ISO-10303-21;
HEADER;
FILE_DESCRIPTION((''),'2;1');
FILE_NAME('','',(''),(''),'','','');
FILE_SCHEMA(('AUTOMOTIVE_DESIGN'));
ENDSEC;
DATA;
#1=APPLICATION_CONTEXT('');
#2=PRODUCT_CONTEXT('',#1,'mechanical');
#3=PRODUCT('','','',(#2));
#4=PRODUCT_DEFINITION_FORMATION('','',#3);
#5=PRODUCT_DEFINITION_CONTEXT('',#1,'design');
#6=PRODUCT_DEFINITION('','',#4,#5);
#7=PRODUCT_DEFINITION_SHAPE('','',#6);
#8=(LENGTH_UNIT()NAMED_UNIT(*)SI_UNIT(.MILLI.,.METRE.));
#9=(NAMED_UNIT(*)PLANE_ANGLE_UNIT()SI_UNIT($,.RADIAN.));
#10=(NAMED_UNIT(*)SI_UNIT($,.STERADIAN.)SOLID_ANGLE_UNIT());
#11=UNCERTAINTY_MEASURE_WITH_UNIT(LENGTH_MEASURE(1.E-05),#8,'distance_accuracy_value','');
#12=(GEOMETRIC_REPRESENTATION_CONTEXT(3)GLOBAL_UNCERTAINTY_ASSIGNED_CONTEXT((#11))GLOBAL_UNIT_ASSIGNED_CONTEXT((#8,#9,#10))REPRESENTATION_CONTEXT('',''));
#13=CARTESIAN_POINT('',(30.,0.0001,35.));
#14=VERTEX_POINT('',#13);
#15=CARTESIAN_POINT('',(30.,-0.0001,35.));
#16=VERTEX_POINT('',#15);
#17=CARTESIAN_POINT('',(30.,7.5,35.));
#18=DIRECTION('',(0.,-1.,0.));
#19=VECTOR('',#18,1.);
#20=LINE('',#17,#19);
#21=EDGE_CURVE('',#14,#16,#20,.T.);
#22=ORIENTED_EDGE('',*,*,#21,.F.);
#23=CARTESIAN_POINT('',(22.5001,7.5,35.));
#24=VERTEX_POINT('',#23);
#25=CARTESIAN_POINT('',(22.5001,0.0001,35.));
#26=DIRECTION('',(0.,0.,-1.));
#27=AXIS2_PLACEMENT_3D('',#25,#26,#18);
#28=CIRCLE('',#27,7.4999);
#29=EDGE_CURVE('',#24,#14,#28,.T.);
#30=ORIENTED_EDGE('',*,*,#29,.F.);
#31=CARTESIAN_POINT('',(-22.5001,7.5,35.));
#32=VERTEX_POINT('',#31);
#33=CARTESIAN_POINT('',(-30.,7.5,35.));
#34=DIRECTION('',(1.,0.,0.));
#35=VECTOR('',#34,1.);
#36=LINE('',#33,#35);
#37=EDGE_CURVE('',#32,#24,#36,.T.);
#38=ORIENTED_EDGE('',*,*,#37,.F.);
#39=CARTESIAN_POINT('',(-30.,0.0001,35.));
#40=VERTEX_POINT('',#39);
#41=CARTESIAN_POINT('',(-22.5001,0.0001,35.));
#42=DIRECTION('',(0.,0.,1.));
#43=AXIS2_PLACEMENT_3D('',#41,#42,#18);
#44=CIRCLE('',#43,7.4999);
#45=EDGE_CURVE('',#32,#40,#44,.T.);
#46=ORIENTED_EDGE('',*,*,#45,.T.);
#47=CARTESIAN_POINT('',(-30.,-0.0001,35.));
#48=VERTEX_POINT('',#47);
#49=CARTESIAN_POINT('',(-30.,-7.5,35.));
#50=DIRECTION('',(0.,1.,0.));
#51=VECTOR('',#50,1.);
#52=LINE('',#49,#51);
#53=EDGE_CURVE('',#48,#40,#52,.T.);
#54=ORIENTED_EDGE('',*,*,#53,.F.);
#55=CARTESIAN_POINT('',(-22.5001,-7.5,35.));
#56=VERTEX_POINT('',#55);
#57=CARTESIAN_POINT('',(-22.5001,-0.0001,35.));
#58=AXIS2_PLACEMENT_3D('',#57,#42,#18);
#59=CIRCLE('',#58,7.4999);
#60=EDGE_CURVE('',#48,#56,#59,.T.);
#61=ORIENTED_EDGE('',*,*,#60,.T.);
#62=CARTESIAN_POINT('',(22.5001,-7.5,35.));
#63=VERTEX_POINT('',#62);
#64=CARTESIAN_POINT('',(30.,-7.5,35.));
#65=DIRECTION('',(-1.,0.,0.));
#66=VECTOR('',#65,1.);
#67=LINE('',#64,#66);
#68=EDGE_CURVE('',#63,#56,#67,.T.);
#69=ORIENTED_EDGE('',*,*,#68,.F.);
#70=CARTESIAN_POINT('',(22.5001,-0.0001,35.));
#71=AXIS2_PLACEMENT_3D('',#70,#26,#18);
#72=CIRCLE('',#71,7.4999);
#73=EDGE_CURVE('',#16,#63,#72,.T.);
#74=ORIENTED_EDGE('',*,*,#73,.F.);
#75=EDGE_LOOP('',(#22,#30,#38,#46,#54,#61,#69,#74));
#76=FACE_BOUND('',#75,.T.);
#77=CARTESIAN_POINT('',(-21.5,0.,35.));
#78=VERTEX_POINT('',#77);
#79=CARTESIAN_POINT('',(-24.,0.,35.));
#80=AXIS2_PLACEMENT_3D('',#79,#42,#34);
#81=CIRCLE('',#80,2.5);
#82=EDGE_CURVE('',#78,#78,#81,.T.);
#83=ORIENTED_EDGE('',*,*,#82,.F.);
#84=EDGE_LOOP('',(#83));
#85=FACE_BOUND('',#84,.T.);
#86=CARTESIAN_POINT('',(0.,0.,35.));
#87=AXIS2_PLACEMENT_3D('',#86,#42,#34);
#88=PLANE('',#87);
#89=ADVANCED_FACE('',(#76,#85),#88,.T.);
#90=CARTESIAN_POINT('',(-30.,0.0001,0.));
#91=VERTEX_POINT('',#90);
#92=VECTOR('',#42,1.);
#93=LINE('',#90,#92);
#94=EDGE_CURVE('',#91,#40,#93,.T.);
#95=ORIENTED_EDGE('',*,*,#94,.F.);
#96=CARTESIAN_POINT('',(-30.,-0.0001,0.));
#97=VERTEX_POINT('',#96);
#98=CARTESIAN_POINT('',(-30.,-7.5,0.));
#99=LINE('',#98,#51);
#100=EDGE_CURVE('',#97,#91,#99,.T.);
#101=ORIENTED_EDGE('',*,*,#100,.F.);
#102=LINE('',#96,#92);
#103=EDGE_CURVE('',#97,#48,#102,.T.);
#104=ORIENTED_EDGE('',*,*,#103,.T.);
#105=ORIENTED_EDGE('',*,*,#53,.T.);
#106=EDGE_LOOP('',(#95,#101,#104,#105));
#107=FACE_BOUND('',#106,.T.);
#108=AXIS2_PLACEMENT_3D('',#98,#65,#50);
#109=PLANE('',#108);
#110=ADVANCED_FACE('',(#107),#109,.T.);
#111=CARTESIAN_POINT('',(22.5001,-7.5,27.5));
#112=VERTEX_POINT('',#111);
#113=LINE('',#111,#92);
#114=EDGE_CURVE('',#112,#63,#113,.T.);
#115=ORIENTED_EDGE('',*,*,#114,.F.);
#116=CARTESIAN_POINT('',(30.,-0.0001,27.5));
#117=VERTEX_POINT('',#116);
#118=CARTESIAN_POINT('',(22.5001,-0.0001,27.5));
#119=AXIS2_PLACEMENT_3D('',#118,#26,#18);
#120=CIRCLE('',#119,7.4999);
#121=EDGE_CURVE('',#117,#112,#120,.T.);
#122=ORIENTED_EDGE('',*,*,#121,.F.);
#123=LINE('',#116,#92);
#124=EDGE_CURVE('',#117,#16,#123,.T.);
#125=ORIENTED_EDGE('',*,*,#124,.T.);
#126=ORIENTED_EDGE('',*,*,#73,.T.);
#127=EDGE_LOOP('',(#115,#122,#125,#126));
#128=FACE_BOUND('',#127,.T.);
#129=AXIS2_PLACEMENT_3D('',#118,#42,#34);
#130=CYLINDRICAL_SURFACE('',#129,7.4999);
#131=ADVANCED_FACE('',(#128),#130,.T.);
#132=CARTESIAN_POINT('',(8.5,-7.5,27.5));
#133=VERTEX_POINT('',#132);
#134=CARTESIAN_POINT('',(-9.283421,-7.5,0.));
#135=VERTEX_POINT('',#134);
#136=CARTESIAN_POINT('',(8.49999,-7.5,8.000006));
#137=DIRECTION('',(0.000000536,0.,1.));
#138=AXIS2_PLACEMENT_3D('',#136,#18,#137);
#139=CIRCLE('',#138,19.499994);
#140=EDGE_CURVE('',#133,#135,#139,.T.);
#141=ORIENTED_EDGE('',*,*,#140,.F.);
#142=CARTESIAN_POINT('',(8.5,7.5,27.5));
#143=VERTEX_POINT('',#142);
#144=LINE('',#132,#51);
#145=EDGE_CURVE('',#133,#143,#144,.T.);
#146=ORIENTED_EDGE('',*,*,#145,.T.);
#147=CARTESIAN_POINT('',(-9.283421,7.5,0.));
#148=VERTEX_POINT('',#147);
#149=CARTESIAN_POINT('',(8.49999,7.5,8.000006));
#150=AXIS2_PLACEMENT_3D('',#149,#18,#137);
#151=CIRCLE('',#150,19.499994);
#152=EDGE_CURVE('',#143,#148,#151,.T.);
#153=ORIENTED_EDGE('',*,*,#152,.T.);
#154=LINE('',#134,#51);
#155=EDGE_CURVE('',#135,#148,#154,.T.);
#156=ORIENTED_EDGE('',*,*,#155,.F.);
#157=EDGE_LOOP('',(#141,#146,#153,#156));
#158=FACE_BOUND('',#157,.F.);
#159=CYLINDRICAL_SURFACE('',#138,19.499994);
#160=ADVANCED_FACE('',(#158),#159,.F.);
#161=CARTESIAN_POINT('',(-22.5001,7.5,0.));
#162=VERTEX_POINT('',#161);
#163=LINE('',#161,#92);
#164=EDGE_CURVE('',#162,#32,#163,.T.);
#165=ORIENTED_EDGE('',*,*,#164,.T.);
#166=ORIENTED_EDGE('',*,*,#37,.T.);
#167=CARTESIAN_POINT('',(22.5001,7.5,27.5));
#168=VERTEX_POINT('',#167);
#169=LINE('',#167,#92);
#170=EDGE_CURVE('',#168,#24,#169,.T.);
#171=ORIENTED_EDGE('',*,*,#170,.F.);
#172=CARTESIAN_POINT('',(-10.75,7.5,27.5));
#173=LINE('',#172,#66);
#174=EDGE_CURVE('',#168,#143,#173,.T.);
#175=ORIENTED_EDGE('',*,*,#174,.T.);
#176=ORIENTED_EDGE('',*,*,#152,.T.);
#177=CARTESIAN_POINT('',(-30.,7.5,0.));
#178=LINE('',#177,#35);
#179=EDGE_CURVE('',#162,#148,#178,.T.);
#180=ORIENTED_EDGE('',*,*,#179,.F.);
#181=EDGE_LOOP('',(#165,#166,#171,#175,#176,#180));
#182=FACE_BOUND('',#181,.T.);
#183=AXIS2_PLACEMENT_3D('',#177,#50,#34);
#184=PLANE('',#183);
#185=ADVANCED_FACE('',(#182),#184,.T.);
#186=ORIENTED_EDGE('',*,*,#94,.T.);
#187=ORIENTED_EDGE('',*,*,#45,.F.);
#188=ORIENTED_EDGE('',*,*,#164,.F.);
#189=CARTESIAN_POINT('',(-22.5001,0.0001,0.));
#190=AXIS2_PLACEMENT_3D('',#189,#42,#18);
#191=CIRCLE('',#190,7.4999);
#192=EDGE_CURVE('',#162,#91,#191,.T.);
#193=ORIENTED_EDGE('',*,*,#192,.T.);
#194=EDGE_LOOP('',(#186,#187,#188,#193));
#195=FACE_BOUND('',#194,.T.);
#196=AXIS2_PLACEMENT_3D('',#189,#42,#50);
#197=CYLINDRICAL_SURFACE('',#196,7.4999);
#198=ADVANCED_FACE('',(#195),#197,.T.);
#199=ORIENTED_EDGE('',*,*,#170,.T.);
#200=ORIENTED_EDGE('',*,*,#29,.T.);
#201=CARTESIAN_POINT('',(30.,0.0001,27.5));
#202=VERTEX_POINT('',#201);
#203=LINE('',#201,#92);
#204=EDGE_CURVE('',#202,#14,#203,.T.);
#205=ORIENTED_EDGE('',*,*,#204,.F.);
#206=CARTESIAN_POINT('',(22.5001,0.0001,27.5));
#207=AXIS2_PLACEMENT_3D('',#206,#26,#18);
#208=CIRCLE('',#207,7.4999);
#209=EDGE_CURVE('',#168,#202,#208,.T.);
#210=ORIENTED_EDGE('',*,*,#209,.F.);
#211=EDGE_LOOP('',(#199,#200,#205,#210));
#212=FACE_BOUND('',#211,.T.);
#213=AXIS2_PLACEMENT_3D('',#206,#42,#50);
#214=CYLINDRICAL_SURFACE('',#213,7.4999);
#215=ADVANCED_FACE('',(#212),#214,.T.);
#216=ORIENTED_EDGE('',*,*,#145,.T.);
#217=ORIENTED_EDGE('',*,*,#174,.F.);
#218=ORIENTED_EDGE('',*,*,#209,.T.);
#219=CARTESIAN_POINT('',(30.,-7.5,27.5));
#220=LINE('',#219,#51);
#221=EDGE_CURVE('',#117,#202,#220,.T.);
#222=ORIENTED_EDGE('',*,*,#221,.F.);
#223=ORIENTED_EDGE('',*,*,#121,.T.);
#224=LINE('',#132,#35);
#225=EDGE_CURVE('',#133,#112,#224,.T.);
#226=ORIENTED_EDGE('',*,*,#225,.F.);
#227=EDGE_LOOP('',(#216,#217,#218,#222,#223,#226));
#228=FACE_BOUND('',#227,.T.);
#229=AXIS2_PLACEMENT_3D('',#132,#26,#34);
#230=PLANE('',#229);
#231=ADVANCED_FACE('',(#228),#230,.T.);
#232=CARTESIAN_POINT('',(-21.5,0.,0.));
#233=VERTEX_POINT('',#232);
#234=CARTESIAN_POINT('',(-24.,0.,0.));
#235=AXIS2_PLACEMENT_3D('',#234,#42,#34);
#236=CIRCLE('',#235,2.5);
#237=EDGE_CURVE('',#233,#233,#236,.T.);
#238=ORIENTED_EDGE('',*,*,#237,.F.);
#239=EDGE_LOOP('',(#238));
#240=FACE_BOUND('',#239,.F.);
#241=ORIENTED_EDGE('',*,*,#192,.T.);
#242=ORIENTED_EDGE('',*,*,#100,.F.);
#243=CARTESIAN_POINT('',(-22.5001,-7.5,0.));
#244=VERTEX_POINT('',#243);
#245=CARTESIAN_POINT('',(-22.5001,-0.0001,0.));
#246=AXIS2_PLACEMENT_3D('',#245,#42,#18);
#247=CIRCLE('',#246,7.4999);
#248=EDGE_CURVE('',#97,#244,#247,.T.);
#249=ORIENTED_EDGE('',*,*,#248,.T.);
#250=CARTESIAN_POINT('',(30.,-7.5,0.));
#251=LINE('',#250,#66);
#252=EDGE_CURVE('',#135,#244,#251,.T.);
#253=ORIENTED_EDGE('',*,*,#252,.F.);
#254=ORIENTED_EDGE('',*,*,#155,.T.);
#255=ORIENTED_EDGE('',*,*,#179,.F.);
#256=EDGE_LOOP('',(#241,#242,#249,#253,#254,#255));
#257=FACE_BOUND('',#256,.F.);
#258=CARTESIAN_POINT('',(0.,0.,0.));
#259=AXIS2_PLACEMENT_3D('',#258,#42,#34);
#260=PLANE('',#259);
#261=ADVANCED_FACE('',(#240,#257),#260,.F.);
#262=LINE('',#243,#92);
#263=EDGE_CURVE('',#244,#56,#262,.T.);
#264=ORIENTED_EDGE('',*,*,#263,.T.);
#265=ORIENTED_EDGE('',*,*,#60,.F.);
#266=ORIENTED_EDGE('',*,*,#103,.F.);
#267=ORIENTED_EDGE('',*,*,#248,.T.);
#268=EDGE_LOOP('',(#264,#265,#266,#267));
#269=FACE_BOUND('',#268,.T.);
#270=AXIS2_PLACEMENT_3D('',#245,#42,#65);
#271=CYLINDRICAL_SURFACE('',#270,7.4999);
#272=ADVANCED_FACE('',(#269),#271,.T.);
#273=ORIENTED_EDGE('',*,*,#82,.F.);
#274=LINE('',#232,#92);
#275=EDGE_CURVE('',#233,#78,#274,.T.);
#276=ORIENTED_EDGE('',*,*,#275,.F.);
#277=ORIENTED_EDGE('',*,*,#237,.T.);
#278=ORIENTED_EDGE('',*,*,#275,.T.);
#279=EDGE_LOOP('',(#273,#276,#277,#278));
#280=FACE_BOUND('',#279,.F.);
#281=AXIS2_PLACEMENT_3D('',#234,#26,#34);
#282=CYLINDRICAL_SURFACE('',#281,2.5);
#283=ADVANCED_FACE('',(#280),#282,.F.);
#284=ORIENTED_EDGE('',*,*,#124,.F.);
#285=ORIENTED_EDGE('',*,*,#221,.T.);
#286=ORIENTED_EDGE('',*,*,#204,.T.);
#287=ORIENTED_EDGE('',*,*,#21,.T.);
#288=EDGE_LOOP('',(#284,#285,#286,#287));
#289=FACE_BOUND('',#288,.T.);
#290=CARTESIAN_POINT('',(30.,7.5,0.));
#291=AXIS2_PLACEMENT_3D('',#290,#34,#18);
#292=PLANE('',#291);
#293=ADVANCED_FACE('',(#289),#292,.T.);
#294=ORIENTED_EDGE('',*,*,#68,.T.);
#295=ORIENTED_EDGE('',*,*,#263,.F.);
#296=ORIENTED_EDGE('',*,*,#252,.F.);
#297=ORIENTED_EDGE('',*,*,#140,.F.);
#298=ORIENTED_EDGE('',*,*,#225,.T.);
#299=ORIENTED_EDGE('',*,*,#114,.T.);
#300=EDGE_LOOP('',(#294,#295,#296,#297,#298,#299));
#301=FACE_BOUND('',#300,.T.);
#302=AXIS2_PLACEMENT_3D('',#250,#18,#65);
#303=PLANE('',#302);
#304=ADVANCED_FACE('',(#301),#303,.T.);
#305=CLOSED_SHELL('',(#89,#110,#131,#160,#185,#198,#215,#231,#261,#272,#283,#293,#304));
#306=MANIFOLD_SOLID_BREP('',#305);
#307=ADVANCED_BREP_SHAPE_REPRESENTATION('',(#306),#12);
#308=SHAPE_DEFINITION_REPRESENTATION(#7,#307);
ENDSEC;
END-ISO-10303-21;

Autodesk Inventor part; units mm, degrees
ref_plane "YZ Plane" through (0, 0, 0) normal (1, 0, 0) x (0, 1, 0)
ref_plane "XZ Plane" through (0, 0, 0) normal (0, 1, 0) x (-1, 0, 0)
ref_plane "XY Plane" through (0, 0, 0) normal (0, 0, 1) x (1, 0, 0)
sketch "Sketch1" plane through (0, 0, 0) normal (0, 0, 1) x (1, 0, 0)
  line L0 (-30, 7.5) -> (30, 7.5)
  line L1 (30, 7.5) -> (30, -7.5)
  line L2 (30, -7.5) -> (-30, -7.5)
  line L3 (-30, -7.5) -> (-30, 7.5)
  circle A0 centre (-24, 0) radius 2.5
  point P0 (0, 0)
  point P1 (0, 7.5)
  point P2 (-30, 0)
  dimension "d0" = 5
  dimension "d1" = 6
  dimension "d2" = 15
  dimension "d3" = 60
extrude "Extrusion1" add sketch "Sketch1" along normal blind 35
sketch "Sketch2" plane through (-30, -7.5, 0) normal (0, -1, 0) x (1, 0, 0)
  circle A0 centre (38.5, 8) radius 17.9938 projected
  arc A1 (38.5, 27.5) -> (56.2834, 0) centre (38.5, 8) ccw
  line L0 (38.5, 27.5) -> (60, 27.5)
  line L1 (60, 0) -> (60, 35) projected
  line L2 (0, 0) -> (60, 0) projected
  point P0 (30, 0)
  point P1 (20.7166, 0)
  dimension "d6" = 39
extrude "Extrusion2" cut sketch "Sketch2" against normal through all contours A0 L2 | A0 L2 A1 L0 L1 picked at (33.6467, 10.9183)
fillet "Fillet1" radius 7.5 4 edges at (-30, 7.5, 17.5) (-30, -7.5, 17.5) (30, -7.5, 31.25) (30, 7.5, 31.25)
properties part number "0008-30-009"
